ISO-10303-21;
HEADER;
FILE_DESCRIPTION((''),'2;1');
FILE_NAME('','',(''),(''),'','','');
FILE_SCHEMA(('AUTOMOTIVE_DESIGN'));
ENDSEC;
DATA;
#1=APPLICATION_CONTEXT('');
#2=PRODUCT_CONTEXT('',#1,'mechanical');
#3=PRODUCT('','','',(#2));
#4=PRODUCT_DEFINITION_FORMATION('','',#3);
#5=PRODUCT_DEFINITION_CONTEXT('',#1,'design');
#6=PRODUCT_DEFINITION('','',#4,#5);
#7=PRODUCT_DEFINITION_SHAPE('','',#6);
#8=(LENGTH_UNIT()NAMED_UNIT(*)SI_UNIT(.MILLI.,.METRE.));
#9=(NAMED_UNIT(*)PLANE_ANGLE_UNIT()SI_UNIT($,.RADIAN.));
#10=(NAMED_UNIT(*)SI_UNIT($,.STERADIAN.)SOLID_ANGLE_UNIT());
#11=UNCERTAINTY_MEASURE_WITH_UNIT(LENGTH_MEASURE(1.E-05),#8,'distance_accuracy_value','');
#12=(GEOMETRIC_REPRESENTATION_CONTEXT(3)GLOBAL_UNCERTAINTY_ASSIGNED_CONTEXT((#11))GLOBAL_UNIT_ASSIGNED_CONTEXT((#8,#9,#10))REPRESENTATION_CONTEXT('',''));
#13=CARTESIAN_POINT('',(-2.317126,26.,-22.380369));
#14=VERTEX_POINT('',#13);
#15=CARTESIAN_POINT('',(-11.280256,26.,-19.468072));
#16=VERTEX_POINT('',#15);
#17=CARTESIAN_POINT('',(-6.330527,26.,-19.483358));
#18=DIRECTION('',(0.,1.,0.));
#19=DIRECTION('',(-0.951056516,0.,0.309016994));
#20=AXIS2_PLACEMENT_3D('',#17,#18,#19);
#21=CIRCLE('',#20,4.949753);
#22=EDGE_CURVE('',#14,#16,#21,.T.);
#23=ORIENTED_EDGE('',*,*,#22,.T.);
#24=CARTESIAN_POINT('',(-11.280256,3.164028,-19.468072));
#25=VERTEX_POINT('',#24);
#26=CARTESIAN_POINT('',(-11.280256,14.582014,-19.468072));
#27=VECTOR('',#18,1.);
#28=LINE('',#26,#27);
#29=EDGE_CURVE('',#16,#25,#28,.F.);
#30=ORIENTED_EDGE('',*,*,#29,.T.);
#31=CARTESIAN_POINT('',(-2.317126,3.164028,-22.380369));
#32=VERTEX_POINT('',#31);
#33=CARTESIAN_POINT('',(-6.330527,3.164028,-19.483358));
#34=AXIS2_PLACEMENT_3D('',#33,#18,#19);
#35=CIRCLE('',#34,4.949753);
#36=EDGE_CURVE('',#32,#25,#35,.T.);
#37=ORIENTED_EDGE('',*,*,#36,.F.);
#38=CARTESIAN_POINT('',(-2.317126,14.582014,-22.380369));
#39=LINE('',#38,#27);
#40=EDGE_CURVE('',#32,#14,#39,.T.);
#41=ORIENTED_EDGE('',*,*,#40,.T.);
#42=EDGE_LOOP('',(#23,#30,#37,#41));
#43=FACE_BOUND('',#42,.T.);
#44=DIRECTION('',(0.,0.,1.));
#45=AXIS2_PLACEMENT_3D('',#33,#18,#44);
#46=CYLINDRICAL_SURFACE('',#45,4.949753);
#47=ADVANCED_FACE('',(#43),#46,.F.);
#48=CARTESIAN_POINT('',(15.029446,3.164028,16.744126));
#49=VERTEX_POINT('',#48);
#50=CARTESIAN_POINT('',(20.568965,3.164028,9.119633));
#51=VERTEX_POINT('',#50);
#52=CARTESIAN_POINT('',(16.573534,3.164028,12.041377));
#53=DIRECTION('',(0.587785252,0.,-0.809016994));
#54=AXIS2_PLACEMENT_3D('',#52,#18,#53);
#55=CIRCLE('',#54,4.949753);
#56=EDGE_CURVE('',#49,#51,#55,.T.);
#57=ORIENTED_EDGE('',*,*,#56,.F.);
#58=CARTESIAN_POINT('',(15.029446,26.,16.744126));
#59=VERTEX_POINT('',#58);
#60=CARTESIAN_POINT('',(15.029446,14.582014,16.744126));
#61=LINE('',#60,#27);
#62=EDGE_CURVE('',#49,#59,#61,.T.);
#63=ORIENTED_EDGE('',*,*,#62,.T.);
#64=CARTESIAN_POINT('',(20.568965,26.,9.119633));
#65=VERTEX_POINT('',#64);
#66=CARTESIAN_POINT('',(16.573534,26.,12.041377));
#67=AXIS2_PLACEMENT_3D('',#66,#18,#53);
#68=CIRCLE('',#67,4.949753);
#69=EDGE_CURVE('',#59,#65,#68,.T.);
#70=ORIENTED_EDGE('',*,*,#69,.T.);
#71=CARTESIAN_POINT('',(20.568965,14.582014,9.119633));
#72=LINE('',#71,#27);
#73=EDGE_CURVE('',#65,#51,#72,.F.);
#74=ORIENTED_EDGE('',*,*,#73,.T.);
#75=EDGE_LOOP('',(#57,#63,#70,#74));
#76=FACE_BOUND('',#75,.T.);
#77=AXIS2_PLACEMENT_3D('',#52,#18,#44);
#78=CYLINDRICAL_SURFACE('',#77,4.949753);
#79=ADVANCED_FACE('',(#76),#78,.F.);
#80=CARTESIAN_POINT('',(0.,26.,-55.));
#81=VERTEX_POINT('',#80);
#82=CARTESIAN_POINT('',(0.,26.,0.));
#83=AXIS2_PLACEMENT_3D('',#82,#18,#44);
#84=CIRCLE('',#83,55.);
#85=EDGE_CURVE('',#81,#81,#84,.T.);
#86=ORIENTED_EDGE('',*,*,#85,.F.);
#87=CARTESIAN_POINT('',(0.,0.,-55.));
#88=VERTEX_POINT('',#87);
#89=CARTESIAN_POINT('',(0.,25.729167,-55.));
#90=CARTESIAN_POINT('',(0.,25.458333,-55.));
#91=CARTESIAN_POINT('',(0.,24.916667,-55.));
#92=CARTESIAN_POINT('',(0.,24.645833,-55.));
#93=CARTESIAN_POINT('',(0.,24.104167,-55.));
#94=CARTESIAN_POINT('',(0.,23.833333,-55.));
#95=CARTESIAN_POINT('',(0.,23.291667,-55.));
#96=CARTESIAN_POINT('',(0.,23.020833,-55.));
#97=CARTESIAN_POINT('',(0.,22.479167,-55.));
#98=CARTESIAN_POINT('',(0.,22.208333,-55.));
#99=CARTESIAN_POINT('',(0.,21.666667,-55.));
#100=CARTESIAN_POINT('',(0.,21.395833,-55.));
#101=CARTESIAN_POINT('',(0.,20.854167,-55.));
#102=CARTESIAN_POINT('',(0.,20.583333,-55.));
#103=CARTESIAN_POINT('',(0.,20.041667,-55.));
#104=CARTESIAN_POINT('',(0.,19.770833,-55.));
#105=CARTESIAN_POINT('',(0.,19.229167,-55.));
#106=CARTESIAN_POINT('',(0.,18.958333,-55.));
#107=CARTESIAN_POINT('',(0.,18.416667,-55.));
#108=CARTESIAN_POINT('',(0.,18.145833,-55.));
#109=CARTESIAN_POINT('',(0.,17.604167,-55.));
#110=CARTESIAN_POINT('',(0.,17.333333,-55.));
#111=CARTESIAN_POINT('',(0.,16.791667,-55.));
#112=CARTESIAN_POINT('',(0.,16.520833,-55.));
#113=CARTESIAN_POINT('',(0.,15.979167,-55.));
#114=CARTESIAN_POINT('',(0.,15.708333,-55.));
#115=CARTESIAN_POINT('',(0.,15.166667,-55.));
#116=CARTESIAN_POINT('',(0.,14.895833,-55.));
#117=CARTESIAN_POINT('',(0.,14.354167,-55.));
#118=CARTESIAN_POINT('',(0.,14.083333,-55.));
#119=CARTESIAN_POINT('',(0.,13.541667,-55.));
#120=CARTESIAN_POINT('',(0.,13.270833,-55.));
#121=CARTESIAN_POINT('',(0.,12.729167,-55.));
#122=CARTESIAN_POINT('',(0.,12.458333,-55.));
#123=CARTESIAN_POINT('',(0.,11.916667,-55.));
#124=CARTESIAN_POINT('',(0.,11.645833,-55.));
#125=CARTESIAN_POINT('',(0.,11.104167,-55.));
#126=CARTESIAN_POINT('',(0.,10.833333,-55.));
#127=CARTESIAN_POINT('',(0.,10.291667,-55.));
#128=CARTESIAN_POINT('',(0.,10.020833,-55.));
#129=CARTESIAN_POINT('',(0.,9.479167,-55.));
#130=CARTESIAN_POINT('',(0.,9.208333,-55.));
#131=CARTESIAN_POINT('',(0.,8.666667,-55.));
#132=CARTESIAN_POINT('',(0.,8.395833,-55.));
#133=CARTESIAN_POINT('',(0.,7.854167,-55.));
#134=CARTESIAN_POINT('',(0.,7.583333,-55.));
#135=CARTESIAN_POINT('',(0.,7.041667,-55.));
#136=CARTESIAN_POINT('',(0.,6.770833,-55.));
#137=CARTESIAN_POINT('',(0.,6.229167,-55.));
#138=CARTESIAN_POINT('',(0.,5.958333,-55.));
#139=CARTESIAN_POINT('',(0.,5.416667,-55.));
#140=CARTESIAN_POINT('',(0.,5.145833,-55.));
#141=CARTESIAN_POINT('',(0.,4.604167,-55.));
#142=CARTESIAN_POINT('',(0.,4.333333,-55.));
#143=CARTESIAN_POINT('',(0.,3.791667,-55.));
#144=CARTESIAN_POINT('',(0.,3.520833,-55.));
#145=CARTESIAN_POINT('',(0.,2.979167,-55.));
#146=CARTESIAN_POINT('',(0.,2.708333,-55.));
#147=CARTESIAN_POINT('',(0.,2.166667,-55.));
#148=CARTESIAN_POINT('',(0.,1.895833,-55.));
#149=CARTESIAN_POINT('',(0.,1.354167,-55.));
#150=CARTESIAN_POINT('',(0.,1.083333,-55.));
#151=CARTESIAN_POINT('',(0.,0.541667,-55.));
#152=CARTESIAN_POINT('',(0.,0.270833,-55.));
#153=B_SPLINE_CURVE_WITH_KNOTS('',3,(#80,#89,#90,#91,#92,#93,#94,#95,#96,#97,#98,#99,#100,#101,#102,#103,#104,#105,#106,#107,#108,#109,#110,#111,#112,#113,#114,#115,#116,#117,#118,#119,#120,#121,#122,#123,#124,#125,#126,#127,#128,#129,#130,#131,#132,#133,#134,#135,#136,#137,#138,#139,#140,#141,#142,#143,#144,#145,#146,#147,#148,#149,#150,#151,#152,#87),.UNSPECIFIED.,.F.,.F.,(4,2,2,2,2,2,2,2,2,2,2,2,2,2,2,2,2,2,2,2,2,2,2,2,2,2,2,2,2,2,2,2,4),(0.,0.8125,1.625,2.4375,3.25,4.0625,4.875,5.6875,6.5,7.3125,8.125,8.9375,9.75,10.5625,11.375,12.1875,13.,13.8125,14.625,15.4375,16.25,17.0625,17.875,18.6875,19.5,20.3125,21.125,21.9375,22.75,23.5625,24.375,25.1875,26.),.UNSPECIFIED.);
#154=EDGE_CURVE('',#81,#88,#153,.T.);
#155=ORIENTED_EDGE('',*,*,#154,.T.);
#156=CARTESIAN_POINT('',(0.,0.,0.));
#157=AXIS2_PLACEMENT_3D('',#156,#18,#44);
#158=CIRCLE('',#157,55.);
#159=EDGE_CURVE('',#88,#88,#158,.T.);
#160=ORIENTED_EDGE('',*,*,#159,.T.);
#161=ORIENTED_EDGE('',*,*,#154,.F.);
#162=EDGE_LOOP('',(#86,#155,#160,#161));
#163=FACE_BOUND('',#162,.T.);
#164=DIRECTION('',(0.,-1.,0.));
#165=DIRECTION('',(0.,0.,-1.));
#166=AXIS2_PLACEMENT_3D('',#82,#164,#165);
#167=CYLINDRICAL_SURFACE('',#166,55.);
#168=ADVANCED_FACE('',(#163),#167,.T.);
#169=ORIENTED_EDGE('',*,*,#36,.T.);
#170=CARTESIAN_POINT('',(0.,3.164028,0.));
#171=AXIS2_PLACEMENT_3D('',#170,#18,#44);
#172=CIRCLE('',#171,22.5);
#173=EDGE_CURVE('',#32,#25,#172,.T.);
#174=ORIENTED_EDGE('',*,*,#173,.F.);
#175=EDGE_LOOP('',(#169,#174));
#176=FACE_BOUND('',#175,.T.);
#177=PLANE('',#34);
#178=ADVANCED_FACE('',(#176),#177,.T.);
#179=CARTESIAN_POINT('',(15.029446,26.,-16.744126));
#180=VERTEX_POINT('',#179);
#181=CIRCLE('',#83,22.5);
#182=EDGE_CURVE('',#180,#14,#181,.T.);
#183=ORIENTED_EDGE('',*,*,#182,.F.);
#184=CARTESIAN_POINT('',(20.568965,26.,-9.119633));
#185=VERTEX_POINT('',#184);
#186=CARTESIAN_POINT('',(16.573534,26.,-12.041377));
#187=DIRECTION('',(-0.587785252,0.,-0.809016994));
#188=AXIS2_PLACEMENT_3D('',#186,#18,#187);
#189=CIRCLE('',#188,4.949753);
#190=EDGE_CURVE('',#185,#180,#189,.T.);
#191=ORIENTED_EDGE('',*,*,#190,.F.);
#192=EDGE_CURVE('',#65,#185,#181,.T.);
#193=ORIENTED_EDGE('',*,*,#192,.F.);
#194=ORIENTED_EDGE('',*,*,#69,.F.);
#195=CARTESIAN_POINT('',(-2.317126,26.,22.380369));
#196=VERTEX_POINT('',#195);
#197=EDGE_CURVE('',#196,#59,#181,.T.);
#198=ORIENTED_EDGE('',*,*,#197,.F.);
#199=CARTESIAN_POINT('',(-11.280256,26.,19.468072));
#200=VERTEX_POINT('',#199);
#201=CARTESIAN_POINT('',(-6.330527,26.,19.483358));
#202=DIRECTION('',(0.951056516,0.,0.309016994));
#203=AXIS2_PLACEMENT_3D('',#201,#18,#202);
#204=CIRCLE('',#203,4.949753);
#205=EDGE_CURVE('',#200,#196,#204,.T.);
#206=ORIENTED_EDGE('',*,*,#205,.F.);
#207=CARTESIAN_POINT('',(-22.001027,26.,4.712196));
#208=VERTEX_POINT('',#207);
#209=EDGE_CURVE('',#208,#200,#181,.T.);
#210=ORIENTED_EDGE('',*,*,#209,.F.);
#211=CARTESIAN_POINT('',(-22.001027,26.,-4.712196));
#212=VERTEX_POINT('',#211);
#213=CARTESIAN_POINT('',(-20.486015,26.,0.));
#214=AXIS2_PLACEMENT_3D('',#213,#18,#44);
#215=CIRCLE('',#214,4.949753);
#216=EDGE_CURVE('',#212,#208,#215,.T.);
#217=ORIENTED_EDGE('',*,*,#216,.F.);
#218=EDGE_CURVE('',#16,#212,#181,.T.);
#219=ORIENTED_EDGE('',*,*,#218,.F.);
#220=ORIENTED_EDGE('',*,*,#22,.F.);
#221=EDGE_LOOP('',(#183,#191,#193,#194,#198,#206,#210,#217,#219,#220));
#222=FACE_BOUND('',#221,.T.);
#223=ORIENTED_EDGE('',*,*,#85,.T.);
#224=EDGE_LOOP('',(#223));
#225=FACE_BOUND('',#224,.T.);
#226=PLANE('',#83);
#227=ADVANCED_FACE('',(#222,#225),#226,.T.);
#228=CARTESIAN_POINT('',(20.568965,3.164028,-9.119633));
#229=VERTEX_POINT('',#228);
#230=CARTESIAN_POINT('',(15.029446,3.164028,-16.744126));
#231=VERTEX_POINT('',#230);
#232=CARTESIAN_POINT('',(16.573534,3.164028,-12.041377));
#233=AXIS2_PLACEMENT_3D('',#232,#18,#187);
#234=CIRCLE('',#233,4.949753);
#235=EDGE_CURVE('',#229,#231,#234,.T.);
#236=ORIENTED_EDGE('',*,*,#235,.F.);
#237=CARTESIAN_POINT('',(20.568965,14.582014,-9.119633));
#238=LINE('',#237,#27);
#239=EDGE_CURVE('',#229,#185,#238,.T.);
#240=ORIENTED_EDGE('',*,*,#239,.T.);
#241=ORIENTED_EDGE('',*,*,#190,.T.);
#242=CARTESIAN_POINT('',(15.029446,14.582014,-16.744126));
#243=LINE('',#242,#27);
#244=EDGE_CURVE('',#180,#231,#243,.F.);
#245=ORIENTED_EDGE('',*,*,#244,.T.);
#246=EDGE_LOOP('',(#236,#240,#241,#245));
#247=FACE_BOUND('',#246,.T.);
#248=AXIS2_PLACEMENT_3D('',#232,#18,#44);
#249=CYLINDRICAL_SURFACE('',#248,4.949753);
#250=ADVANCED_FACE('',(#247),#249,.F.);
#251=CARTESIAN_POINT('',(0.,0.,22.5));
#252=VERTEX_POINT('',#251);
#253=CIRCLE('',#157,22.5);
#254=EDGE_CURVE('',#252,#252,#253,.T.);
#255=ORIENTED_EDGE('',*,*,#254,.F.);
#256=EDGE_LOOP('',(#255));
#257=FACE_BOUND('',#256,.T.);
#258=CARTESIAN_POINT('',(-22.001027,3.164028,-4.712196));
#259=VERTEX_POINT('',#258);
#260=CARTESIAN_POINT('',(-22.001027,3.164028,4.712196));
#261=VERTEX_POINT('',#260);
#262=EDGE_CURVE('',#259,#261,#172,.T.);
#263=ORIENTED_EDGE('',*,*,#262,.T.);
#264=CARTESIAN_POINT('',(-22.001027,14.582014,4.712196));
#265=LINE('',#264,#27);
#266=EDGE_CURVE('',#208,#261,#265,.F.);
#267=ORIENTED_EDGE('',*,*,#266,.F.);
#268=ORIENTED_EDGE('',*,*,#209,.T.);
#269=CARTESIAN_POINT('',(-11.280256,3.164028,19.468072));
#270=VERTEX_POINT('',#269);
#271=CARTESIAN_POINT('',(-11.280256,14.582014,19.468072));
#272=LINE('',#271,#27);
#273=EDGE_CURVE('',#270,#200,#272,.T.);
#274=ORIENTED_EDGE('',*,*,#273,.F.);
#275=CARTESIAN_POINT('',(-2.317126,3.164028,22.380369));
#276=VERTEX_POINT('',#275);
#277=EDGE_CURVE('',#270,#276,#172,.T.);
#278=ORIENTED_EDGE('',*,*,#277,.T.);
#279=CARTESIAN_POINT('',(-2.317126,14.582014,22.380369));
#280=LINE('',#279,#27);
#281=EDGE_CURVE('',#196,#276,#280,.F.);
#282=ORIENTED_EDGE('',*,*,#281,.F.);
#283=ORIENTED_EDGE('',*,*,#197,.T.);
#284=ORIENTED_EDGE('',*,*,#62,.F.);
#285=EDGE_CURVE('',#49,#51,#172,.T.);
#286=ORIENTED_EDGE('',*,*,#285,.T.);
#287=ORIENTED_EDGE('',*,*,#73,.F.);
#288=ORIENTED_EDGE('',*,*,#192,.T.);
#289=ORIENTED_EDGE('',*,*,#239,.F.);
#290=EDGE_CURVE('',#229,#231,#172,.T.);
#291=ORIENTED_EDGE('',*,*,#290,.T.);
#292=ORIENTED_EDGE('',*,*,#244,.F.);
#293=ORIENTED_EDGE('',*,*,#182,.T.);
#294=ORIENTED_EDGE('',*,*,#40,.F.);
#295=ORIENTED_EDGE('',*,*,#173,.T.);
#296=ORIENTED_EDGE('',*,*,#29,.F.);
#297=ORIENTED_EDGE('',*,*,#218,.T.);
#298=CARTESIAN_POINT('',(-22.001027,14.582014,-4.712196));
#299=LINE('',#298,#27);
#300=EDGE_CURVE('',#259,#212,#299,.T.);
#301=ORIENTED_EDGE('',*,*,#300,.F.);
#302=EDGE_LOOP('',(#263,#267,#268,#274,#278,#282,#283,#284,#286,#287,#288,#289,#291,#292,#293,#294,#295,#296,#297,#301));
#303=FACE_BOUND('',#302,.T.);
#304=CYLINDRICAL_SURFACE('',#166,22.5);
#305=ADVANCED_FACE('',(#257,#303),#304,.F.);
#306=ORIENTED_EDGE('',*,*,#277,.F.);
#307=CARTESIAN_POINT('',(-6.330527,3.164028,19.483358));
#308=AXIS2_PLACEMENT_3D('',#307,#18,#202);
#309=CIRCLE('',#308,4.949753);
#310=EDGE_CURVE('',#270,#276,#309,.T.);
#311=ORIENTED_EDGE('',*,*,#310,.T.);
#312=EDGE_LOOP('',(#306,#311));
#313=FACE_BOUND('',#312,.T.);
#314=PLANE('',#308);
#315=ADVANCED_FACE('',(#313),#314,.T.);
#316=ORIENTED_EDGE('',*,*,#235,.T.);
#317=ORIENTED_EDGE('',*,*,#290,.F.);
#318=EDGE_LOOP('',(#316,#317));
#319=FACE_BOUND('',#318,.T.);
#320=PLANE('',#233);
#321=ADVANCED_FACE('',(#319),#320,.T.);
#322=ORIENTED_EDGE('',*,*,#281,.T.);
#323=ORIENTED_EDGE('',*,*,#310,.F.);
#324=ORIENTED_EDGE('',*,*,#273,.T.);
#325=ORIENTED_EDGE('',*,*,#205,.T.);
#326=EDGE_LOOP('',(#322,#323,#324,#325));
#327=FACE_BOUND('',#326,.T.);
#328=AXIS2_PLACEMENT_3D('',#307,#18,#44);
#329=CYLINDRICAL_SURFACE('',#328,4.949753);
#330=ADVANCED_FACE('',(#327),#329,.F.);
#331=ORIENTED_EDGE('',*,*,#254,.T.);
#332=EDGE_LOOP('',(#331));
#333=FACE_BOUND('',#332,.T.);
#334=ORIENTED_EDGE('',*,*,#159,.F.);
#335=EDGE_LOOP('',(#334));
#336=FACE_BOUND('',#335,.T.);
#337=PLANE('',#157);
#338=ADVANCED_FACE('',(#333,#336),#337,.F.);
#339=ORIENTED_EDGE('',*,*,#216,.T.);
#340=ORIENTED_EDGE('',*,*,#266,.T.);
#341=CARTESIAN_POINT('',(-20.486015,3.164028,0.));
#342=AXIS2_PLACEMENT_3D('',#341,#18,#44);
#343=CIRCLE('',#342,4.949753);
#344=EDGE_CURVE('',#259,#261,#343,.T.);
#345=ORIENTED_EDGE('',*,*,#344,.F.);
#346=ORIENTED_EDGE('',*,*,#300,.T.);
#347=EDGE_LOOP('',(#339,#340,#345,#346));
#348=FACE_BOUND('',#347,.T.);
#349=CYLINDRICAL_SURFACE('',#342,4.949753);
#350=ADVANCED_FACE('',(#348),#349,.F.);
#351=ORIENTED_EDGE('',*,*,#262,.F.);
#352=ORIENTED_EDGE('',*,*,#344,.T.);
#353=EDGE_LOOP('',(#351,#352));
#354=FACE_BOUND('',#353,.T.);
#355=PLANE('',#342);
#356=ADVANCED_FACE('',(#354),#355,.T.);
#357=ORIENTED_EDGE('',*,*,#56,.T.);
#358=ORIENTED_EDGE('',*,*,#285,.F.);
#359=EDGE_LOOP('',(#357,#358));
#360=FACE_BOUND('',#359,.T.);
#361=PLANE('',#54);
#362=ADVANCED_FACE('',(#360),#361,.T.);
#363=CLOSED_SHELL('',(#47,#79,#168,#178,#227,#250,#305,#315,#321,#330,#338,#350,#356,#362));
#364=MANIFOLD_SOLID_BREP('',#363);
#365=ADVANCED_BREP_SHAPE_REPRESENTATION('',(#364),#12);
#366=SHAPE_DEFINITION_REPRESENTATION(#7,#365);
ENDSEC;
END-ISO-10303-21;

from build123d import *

# Parameters (mm, degrees)
SKETCH1_R           = 55
BOSS_EXTRUDE1_DEPTH = 26
SKETCH2_R           = 22.5
CUT_EXTRUDE1_DEPTH  = 83.012194215
SKETCH3_R           = 4.949753181
CUT_EXTRUDE2_DEPTH  = 22.835972167
CIRPATTERN1_COUNT   = 5


with BuildPart() as part:
    # Sketch1 → Boss-Extrude1 (new body)
    with BuildSketch(Plane(origin=(0, 0, 0), x_dir=(1, 0, 0), z_dir=(0, 1, 0))):
        Circle(SKETCH1_R)
    extrude(amount=BOSS_EXTRUDE1_DEPTH)

    # Sketch2 → Cut-Extrude1 (cut, through all)
    with BuildSketch(Plane(origin=(0, 0, 0), x_dir=(1, 0, 0), z_dir=(0, 1, 0))):
        Circle(SKETCH2_R)
    extrude(amount=CUT_EXTRUDE1_DEPTH, mode=Mode.SUBTRACT)

    # Sketch3 → Cut-Extrude2 (cut)
    with BuildSketch(Plane(origin=(0, 26, 0), x_dir=(1, 0, 0), z_dir=(0, 1, 0))):
        with Locations((-20.486014736, 0)):
            Circle(SKETCH3_R)
    cut_extrude2 = extrude(amount=-CUT_EXTRUDE2_DEPTH, mode=Mode.SUBTRACT)

    # CirPattern1: Cut-Extrude2 ×5 about axis
    cirpattern1_axis = Axis((0, 0, 0), (0, 1, 0))
    for i in range(1, CIRPATTERN1_COUNT):
        add(cut_extrude2.rotate(cirpattern1_axis, i * 360 / CIRPATTERN1_COUNT), mode=Mode.SUBTRACT)


solid = part.part
